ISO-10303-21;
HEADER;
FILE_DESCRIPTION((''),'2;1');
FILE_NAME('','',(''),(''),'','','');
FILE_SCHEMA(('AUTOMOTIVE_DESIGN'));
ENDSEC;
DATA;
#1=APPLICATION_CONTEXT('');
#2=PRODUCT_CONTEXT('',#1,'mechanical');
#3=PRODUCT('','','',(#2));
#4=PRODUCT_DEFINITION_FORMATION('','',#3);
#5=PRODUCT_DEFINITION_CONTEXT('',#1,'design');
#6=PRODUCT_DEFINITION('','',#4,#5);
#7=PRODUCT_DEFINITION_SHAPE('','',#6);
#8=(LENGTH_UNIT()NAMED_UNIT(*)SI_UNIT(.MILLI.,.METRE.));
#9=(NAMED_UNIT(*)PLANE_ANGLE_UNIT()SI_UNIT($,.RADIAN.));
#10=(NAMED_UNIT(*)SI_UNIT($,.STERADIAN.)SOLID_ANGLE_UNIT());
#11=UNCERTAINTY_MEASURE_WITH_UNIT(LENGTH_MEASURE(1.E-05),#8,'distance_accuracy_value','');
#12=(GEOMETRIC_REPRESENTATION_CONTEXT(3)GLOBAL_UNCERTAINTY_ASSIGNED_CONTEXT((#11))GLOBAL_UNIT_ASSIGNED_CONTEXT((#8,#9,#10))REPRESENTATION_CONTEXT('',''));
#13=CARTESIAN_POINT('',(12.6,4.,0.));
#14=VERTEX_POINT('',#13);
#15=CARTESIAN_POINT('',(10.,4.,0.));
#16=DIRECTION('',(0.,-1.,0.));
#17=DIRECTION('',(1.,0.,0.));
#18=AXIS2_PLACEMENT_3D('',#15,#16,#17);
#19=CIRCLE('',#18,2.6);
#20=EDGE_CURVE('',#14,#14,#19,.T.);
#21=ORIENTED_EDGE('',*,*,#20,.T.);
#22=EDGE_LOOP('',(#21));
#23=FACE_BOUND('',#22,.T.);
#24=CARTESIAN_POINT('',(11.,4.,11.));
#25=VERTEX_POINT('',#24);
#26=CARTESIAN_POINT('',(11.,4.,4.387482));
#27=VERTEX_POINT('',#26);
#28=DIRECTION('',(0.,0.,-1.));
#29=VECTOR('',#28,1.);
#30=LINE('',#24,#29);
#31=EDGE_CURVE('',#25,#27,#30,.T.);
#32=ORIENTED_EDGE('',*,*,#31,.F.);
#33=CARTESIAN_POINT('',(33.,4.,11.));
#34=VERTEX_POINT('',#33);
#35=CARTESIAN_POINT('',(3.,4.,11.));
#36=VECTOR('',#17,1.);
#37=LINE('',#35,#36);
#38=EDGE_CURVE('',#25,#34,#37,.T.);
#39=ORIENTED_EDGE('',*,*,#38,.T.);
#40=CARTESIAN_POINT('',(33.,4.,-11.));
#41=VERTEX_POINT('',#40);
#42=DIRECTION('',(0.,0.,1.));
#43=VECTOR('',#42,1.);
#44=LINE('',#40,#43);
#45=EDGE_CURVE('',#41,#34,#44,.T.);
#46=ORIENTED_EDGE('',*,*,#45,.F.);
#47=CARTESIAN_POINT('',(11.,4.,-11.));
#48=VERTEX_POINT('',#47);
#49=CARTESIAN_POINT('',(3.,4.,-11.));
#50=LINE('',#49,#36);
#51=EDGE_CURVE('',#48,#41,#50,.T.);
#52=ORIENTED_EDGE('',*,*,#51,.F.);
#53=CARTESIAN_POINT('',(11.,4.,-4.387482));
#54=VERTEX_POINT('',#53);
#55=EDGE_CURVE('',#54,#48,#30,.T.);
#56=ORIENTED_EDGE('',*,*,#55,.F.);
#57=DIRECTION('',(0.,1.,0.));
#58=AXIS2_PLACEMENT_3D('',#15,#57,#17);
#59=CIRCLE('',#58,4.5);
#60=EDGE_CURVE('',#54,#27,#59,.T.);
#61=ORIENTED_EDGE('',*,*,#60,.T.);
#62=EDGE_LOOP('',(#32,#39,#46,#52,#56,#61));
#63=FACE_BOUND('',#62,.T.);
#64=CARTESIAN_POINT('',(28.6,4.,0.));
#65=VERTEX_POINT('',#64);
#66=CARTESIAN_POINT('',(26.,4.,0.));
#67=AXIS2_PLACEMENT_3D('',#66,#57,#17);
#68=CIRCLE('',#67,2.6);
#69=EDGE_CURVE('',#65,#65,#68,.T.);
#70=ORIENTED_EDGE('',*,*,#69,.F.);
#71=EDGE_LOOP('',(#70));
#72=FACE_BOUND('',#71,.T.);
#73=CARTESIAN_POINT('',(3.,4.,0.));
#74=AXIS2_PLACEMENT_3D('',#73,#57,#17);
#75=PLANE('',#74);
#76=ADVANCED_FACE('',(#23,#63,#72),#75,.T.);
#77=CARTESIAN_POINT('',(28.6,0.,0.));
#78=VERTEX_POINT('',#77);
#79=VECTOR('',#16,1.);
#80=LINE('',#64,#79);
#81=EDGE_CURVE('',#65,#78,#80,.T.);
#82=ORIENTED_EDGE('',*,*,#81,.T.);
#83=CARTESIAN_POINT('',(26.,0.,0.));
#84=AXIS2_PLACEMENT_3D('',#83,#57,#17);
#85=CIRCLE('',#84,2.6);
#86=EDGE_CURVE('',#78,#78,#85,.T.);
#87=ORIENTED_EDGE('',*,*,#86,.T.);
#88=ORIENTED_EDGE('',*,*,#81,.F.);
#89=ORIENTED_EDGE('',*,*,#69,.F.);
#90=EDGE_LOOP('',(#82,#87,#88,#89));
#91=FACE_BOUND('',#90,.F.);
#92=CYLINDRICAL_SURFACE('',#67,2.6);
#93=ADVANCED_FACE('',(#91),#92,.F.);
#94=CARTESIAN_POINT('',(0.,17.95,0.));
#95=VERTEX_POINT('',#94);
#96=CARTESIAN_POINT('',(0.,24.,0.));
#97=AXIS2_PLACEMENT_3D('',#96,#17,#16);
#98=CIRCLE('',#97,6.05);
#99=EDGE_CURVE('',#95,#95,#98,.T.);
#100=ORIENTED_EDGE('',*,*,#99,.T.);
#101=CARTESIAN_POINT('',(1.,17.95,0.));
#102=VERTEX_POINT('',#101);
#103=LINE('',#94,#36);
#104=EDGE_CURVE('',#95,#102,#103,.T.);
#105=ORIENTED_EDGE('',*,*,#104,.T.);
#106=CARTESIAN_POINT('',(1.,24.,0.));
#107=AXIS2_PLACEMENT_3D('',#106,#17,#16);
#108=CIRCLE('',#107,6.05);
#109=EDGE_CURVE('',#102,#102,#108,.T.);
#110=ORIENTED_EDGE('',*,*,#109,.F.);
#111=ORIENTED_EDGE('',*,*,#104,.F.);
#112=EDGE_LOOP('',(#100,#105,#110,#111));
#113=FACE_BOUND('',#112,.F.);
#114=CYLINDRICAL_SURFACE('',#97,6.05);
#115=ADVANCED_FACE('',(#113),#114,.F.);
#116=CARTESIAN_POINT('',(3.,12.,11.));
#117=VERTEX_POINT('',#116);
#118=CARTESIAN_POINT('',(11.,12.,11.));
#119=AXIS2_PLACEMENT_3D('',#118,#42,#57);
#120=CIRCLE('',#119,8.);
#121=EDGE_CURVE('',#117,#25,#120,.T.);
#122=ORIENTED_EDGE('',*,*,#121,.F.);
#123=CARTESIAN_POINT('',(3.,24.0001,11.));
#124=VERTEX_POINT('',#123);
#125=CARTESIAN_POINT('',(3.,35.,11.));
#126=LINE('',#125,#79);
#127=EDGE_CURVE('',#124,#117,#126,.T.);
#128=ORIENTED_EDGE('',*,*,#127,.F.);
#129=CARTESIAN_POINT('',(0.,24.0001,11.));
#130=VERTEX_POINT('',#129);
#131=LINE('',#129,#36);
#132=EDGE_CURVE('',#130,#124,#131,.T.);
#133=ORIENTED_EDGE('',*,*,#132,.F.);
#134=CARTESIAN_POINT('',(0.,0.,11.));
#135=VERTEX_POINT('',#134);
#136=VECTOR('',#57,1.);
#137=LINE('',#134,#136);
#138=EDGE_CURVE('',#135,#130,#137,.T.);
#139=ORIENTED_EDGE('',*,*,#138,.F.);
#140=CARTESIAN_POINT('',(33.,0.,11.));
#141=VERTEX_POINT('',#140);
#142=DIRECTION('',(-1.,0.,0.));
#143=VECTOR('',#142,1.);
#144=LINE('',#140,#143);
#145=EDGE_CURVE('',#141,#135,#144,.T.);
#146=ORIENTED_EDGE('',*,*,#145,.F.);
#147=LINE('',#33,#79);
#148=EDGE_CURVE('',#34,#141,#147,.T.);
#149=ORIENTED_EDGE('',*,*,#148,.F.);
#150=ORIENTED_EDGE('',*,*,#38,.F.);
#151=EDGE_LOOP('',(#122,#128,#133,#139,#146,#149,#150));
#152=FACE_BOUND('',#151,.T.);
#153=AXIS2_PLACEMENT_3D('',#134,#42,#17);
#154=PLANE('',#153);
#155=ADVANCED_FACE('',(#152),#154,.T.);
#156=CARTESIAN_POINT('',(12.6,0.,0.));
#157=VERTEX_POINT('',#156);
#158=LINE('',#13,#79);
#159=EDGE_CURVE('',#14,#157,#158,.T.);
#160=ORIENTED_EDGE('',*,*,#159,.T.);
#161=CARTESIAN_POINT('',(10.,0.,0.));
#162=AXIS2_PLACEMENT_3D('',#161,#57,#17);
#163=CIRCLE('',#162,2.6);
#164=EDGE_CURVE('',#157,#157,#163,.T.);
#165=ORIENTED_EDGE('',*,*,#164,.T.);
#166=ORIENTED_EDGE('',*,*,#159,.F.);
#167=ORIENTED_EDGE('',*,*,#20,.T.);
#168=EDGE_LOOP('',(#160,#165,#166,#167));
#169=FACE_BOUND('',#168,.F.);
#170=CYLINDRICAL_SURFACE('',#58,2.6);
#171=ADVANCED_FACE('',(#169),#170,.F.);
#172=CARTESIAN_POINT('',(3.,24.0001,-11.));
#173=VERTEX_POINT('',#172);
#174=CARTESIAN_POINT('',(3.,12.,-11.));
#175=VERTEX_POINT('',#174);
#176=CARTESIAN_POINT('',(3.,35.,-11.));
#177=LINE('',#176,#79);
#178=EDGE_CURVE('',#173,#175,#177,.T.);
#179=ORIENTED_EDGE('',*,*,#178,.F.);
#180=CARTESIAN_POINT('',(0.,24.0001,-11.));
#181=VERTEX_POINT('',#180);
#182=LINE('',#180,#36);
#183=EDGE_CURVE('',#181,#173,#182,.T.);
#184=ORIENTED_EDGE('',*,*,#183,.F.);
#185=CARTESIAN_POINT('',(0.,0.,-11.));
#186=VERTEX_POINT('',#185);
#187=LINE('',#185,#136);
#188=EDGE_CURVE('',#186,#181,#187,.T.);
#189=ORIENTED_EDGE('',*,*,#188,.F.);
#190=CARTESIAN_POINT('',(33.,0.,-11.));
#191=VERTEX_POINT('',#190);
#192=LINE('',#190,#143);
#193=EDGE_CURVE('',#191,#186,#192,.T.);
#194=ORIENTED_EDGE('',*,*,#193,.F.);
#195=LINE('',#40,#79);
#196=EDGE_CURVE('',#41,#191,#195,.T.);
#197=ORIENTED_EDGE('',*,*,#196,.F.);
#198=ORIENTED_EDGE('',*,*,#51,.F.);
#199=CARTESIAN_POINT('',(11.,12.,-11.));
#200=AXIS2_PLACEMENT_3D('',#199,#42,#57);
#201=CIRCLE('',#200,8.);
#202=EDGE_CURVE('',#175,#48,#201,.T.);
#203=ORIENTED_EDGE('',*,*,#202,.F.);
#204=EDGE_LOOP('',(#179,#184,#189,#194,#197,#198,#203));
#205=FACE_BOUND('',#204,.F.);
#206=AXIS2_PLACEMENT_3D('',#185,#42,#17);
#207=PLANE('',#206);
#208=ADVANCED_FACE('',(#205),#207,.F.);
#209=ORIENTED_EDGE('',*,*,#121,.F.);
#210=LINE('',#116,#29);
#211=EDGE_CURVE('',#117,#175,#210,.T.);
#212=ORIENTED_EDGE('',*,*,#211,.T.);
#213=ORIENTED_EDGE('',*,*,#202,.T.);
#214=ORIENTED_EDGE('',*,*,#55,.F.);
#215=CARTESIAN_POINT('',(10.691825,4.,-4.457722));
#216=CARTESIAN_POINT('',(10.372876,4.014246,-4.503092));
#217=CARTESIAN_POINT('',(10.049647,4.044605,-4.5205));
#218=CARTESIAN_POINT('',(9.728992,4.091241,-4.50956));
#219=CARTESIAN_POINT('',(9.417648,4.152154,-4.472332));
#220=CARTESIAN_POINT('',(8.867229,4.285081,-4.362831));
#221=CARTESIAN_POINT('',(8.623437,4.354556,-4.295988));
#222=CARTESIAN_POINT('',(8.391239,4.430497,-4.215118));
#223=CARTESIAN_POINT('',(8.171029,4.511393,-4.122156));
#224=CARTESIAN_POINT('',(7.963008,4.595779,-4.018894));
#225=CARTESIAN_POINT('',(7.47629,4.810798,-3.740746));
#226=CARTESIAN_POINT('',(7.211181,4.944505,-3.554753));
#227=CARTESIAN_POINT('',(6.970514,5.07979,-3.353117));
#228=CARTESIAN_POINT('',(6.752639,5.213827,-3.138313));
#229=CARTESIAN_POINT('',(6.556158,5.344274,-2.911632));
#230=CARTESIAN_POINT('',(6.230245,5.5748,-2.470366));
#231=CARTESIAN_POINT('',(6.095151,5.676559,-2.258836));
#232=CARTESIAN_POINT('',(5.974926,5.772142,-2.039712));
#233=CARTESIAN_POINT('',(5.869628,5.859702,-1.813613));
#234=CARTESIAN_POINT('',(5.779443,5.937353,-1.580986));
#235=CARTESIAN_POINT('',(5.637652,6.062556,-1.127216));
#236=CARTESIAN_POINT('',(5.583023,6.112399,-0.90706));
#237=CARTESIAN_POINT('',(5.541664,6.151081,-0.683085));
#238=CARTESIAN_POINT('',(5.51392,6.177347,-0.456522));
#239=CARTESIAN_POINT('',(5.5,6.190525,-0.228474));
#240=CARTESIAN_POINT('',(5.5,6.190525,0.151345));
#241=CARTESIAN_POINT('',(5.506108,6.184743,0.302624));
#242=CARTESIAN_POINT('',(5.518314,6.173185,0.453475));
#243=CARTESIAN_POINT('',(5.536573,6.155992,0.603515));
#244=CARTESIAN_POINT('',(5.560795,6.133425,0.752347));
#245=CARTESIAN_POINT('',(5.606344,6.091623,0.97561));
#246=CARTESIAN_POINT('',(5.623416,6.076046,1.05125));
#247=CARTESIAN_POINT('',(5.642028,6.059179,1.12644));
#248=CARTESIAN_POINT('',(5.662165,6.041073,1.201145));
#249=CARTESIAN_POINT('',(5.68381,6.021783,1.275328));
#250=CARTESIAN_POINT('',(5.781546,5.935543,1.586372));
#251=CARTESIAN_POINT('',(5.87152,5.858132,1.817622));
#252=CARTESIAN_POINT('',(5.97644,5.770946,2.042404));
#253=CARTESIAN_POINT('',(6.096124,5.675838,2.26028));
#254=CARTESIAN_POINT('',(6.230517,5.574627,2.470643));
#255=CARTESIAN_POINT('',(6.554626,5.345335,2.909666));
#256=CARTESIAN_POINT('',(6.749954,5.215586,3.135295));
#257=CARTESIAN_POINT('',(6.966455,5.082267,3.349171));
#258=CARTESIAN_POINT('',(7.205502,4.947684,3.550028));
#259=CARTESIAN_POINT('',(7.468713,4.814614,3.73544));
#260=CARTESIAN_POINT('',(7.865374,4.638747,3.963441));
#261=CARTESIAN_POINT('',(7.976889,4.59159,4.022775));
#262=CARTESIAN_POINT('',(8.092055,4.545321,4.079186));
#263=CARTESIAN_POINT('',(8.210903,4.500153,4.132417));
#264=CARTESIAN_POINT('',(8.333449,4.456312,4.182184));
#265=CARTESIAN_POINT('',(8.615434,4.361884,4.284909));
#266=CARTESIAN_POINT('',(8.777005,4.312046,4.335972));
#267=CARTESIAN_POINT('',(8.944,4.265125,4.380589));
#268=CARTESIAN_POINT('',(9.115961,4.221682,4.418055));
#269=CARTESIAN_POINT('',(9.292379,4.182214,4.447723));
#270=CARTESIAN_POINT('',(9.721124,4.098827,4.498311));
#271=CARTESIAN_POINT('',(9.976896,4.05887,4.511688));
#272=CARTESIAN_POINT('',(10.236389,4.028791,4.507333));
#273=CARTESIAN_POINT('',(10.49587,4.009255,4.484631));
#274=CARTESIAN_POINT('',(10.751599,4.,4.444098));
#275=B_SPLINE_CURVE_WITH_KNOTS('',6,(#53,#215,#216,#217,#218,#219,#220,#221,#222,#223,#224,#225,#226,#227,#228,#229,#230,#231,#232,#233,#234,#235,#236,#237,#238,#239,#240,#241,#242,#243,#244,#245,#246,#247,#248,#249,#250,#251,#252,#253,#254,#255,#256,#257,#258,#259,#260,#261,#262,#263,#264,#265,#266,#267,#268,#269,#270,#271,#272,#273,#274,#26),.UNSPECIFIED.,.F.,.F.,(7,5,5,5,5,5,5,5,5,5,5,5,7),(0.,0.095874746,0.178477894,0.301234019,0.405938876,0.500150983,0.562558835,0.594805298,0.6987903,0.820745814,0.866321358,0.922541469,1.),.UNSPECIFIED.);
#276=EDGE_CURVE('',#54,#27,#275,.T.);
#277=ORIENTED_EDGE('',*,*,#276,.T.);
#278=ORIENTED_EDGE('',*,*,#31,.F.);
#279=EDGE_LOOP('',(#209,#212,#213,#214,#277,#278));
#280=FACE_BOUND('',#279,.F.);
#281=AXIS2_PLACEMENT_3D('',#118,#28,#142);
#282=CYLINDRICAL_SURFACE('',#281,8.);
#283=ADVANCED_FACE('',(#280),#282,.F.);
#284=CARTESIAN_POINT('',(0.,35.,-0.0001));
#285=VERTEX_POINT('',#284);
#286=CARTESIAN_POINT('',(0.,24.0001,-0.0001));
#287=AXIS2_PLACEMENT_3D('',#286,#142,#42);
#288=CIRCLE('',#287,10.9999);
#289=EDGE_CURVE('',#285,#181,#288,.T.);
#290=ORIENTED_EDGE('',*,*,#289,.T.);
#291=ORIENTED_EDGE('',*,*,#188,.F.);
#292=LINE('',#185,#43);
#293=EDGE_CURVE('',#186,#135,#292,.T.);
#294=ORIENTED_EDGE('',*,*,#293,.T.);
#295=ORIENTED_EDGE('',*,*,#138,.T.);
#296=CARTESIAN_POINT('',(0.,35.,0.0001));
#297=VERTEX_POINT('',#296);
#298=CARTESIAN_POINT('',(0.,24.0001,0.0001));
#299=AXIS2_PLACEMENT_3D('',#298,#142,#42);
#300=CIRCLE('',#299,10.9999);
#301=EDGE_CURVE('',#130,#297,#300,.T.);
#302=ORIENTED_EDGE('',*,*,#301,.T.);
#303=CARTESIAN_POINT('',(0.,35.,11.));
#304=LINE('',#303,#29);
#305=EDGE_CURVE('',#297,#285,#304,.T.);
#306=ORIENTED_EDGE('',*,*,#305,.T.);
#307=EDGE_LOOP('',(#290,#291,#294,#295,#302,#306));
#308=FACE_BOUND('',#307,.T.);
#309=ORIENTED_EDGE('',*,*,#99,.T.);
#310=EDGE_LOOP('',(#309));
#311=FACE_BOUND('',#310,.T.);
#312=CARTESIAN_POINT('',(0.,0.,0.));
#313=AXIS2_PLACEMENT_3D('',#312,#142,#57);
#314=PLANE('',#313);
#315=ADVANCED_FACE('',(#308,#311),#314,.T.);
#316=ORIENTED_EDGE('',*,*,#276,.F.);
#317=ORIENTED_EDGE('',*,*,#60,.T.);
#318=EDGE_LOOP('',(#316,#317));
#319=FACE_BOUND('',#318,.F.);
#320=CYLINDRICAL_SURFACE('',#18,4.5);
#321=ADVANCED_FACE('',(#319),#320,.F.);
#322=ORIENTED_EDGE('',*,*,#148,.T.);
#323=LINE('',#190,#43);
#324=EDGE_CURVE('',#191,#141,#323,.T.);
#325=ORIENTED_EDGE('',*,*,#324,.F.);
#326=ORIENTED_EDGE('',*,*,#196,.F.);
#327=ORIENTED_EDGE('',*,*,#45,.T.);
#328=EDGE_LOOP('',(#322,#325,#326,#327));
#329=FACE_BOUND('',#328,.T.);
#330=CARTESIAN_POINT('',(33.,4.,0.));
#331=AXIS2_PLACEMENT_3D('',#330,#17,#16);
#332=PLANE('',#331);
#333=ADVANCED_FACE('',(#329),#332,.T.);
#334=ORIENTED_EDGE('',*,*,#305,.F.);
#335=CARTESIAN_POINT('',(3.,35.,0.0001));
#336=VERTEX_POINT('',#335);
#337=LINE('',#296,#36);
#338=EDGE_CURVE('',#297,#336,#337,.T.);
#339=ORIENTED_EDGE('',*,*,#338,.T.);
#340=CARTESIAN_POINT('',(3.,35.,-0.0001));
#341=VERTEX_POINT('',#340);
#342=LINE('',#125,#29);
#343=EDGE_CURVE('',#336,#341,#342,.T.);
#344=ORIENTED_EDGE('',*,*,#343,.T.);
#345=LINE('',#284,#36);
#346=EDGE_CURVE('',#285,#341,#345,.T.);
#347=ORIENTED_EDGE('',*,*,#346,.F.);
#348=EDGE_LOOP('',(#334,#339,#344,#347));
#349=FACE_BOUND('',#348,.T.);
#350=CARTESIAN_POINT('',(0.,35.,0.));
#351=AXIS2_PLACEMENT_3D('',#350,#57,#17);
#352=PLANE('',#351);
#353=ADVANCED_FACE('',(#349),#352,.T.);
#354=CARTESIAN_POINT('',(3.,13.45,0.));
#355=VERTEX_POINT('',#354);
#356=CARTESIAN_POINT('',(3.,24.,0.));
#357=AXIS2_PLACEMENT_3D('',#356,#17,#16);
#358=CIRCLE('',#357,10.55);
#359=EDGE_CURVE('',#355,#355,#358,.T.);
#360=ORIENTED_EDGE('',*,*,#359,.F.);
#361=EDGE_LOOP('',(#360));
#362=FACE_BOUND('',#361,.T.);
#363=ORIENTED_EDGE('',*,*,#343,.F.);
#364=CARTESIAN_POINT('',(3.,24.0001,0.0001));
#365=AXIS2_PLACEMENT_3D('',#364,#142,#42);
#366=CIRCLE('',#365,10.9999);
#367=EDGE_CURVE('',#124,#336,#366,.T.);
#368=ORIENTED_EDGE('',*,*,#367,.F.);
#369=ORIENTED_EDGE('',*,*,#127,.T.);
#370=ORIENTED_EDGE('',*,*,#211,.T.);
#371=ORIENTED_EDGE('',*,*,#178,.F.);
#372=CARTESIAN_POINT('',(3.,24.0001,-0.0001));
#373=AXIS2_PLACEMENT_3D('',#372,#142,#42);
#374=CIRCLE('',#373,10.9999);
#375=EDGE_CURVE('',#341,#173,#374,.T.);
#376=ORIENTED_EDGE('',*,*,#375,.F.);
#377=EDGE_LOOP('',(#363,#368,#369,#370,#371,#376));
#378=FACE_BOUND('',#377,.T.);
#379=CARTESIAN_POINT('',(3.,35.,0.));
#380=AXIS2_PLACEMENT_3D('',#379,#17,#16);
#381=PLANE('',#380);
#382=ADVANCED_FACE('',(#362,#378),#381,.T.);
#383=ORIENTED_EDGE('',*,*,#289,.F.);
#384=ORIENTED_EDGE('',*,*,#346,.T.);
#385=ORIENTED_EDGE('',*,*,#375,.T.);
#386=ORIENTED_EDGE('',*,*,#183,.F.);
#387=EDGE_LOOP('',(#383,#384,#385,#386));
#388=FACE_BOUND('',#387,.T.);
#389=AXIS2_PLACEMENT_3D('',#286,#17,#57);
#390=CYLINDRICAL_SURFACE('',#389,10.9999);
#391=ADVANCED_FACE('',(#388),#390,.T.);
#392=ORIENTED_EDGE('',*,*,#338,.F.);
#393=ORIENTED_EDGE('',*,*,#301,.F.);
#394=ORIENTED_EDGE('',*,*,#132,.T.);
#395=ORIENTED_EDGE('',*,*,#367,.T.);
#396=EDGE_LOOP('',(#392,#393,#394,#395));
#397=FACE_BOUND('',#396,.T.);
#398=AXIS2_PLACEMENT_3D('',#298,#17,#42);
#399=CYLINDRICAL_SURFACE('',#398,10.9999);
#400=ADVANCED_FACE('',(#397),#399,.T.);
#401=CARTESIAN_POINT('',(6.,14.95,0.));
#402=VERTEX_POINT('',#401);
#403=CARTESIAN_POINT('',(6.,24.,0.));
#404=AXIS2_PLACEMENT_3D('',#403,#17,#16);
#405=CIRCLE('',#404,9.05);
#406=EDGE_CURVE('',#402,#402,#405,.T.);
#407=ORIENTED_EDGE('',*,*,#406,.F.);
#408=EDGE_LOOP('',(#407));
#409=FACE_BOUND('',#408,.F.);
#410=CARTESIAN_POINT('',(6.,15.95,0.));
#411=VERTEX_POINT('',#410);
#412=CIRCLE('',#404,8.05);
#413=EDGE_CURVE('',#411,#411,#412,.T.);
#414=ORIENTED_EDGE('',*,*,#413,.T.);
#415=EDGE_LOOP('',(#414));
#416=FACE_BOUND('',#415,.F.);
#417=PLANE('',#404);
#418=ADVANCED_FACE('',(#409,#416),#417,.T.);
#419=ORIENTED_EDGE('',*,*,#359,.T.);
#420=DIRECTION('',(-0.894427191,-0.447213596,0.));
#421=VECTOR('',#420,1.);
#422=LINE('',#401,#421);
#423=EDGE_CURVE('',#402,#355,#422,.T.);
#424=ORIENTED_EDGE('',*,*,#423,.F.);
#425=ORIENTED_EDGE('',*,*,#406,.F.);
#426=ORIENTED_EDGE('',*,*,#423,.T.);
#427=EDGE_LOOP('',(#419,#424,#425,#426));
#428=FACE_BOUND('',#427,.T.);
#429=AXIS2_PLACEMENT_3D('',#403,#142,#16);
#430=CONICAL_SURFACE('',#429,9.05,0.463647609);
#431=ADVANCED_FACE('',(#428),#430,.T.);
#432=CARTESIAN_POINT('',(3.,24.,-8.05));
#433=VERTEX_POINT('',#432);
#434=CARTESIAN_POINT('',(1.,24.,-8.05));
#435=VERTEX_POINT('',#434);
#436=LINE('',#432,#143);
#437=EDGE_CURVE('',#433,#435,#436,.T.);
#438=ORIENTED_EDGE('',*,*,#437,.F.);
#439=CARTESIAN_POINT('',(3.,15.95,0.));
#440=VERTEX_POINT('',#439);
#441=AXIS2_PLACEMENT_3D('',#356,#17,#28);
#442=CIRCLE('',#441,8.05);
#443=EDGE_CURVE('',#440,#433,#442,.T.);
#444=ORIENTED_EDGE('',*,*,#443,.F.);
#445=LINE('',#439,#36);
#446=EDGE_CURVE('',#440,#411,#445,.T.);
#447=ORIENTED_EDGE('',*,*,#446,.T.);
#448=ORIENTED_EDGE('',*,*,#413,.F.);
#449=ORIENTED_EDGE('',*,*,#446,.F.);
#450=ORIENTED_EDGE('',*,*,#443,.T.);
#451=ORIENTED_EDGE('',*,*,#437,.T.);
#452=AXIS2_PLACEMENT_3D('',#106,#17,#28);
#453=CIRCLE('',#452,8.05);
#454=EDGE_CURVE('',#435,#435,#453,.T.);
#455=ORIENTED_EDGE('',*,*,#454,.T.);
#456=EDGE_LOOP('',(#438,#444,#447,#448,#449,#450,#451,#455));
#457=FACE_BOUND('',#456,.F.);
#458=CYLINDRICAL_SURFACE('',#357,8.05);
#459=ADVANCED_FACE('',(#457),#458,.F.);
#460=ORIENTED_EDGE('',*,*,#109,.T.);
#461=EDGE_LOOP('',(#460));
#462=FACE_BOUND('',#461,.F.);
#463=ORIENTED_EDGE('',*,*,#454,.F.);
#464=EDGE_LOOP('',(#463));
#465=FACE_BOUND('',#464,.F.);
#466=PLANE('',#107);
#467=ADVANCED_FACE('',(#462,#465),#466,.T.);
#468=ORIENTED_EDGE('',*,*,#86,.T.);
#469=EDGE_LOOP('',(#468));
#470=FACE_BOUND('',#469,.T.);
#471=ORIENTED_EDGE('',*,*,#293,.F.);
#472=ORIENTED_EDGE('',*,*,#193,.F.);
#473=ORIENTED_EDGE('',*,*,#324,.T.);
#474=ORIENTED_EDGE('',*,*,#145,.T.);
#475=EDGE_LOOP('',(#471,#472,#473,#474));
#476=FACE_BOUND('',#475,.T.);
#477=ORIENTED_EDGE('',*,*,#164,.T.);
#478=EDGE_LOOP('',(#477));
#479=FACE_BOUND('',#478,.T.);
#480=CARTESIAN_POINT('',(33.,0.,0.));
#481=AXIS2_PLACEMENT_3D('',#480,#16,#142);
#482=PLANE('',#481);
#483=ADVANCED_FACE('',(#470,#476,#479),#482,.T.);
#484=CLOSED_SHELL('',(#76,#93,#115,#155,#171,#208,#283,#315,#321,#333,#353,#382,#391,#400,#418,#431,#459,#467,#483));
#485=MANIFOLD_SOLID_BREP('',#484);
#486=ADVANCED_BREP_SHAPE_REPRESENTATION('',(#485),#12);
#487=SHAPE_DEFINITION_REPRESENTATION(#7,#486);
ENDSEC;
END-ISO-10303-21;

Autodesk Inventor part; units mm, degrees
ref_plane "YZ Plane" through (0, 0, 0) normal (1, 0, 0) x (0, 1, 0)
ref_plane "XZ Plane" through (0, 0, 0) normal (0, 1, 0) x (-1, 0, 0)
ref_plane "XY Plane" through (0, 0, 0) normal (0, 0, 1) x (1, 0, 0)
sketch "Sketch3" plane through (0, 0, 0) normal (0, 0, 1) x (1, 0, 0)
  line L0 (0, 0) -> (0, 35)
  line L1 (0, 35) -> (3, 35)
  line L2 (3, 35) -> (3, 4)
  line L3 (3, 4) -> (33, 4)
  line L4 (33, 4) -> (33, 0)
  line L5 (33, 0) -> (0, 0)
  line L6 (0, 25) -> (3, 25) construction
  dimension "d0" = 10
  dimension "d1" = 25
  dimension "d2" = 30
  dimension "d3" = 4
  dimension "d4" = 3
extrude "Extrusion1" add sketch "Sketch3" along normal mid plane 22
sketch "Sketch4" plane through (3, 4, -11) normal (1, 0, 0) x (0, 0, -1)
  line L0 (0, 31) -> (-22, 31) construction
  line L1 (-11, 31) -> (-11, 20) construction
  circle A0 centre (-11, 20) radius 8.05
  point P0 (-11, -4)
  dimension "d7" = 11
  dimension "d8" = 16.1
extrude "Extrusion2" cut sketch "Sketch4" against normal through all
fillet "Fillet3" radius 8 1 edges at (3, 4, 0)
sketch "Sketch5" plane through (3, 4, -11) normal (0, 1, 0) x (1, 0, 0)
  line L0 (30, 0) -> (30, -22) construction
  line L1 (30, -11) -> (0, -11) construction
  line L2 (0, 0) -> (0, -22) construction
  circle A0 centre (7, -11) radius 2.6
  circle A1 centre (23, -11) radius 2.6
  point P0 (-3, -11)
  dimension "d11" = 7
  dimension "d12" = 7
  dimension "d13" = 5.2
extrude "Extrusion3" cut sketch "Sketch5" along normal mid plane 24.75
sketch "Sketch6" plane through (0, 0, 0) normal (0, 0, 1) x (1, 0, 0)
  line L0 (3, 15.95) -> (0, 15.95) construction
  line L1 (0, 15.95) -> (0, 17.95)
  line L2 (0, 17.95) -> (1, 17.95)
  line L3 (1, 17.95) -> (1, 15.95)
  line L4 (0, 15.95) -> (0, 32.05) construction
  line L5 (1, 15.95) -> (0, 15.95)
  line L6 (3, 32.05) -> (3, 15.95) construction
  line L7 (3, 15.95) -> (6, 15.95)
  line L8 (6, 15.95) -> (6, 14.95)
  line L9 (6, 14.95) -> (3, 13.45)
  line L10 (3, 13.45) -> (3, 15.95)
  line L11 (0, 24) -> (3, 24) construction
  point P0 (0, 0)
  dimension "d16" = 1
  dimension "d17" = 2
  dimension "d18" = 5
  dimension "d19" = 2.5
  dimension "d20" = 1
revolve "Revolution1" add sketch "Sketch6" angle 360 about axis through (0, 24, 0) along (1, 0, 0)
fillet "Fillet1" radius 11 2 edges at (1.5, 35, 11) (1.5, 35, -11)
sketch "Sketch11" plane through (33, 4, 11) normal (0, 1, 0) x (1, 0, 0)
  circle A0 centre (-23, 11) radius 2.6 projected
  circle A1 centre (-23, 11) radius 4.5
  point P0 (-33, 11)
  dimension "d42" = 9
extrude "Extrusion8" cut sketch "Sketch11" along normal blind 5 contours A0 | A1
properties part number "Winder_idler"
